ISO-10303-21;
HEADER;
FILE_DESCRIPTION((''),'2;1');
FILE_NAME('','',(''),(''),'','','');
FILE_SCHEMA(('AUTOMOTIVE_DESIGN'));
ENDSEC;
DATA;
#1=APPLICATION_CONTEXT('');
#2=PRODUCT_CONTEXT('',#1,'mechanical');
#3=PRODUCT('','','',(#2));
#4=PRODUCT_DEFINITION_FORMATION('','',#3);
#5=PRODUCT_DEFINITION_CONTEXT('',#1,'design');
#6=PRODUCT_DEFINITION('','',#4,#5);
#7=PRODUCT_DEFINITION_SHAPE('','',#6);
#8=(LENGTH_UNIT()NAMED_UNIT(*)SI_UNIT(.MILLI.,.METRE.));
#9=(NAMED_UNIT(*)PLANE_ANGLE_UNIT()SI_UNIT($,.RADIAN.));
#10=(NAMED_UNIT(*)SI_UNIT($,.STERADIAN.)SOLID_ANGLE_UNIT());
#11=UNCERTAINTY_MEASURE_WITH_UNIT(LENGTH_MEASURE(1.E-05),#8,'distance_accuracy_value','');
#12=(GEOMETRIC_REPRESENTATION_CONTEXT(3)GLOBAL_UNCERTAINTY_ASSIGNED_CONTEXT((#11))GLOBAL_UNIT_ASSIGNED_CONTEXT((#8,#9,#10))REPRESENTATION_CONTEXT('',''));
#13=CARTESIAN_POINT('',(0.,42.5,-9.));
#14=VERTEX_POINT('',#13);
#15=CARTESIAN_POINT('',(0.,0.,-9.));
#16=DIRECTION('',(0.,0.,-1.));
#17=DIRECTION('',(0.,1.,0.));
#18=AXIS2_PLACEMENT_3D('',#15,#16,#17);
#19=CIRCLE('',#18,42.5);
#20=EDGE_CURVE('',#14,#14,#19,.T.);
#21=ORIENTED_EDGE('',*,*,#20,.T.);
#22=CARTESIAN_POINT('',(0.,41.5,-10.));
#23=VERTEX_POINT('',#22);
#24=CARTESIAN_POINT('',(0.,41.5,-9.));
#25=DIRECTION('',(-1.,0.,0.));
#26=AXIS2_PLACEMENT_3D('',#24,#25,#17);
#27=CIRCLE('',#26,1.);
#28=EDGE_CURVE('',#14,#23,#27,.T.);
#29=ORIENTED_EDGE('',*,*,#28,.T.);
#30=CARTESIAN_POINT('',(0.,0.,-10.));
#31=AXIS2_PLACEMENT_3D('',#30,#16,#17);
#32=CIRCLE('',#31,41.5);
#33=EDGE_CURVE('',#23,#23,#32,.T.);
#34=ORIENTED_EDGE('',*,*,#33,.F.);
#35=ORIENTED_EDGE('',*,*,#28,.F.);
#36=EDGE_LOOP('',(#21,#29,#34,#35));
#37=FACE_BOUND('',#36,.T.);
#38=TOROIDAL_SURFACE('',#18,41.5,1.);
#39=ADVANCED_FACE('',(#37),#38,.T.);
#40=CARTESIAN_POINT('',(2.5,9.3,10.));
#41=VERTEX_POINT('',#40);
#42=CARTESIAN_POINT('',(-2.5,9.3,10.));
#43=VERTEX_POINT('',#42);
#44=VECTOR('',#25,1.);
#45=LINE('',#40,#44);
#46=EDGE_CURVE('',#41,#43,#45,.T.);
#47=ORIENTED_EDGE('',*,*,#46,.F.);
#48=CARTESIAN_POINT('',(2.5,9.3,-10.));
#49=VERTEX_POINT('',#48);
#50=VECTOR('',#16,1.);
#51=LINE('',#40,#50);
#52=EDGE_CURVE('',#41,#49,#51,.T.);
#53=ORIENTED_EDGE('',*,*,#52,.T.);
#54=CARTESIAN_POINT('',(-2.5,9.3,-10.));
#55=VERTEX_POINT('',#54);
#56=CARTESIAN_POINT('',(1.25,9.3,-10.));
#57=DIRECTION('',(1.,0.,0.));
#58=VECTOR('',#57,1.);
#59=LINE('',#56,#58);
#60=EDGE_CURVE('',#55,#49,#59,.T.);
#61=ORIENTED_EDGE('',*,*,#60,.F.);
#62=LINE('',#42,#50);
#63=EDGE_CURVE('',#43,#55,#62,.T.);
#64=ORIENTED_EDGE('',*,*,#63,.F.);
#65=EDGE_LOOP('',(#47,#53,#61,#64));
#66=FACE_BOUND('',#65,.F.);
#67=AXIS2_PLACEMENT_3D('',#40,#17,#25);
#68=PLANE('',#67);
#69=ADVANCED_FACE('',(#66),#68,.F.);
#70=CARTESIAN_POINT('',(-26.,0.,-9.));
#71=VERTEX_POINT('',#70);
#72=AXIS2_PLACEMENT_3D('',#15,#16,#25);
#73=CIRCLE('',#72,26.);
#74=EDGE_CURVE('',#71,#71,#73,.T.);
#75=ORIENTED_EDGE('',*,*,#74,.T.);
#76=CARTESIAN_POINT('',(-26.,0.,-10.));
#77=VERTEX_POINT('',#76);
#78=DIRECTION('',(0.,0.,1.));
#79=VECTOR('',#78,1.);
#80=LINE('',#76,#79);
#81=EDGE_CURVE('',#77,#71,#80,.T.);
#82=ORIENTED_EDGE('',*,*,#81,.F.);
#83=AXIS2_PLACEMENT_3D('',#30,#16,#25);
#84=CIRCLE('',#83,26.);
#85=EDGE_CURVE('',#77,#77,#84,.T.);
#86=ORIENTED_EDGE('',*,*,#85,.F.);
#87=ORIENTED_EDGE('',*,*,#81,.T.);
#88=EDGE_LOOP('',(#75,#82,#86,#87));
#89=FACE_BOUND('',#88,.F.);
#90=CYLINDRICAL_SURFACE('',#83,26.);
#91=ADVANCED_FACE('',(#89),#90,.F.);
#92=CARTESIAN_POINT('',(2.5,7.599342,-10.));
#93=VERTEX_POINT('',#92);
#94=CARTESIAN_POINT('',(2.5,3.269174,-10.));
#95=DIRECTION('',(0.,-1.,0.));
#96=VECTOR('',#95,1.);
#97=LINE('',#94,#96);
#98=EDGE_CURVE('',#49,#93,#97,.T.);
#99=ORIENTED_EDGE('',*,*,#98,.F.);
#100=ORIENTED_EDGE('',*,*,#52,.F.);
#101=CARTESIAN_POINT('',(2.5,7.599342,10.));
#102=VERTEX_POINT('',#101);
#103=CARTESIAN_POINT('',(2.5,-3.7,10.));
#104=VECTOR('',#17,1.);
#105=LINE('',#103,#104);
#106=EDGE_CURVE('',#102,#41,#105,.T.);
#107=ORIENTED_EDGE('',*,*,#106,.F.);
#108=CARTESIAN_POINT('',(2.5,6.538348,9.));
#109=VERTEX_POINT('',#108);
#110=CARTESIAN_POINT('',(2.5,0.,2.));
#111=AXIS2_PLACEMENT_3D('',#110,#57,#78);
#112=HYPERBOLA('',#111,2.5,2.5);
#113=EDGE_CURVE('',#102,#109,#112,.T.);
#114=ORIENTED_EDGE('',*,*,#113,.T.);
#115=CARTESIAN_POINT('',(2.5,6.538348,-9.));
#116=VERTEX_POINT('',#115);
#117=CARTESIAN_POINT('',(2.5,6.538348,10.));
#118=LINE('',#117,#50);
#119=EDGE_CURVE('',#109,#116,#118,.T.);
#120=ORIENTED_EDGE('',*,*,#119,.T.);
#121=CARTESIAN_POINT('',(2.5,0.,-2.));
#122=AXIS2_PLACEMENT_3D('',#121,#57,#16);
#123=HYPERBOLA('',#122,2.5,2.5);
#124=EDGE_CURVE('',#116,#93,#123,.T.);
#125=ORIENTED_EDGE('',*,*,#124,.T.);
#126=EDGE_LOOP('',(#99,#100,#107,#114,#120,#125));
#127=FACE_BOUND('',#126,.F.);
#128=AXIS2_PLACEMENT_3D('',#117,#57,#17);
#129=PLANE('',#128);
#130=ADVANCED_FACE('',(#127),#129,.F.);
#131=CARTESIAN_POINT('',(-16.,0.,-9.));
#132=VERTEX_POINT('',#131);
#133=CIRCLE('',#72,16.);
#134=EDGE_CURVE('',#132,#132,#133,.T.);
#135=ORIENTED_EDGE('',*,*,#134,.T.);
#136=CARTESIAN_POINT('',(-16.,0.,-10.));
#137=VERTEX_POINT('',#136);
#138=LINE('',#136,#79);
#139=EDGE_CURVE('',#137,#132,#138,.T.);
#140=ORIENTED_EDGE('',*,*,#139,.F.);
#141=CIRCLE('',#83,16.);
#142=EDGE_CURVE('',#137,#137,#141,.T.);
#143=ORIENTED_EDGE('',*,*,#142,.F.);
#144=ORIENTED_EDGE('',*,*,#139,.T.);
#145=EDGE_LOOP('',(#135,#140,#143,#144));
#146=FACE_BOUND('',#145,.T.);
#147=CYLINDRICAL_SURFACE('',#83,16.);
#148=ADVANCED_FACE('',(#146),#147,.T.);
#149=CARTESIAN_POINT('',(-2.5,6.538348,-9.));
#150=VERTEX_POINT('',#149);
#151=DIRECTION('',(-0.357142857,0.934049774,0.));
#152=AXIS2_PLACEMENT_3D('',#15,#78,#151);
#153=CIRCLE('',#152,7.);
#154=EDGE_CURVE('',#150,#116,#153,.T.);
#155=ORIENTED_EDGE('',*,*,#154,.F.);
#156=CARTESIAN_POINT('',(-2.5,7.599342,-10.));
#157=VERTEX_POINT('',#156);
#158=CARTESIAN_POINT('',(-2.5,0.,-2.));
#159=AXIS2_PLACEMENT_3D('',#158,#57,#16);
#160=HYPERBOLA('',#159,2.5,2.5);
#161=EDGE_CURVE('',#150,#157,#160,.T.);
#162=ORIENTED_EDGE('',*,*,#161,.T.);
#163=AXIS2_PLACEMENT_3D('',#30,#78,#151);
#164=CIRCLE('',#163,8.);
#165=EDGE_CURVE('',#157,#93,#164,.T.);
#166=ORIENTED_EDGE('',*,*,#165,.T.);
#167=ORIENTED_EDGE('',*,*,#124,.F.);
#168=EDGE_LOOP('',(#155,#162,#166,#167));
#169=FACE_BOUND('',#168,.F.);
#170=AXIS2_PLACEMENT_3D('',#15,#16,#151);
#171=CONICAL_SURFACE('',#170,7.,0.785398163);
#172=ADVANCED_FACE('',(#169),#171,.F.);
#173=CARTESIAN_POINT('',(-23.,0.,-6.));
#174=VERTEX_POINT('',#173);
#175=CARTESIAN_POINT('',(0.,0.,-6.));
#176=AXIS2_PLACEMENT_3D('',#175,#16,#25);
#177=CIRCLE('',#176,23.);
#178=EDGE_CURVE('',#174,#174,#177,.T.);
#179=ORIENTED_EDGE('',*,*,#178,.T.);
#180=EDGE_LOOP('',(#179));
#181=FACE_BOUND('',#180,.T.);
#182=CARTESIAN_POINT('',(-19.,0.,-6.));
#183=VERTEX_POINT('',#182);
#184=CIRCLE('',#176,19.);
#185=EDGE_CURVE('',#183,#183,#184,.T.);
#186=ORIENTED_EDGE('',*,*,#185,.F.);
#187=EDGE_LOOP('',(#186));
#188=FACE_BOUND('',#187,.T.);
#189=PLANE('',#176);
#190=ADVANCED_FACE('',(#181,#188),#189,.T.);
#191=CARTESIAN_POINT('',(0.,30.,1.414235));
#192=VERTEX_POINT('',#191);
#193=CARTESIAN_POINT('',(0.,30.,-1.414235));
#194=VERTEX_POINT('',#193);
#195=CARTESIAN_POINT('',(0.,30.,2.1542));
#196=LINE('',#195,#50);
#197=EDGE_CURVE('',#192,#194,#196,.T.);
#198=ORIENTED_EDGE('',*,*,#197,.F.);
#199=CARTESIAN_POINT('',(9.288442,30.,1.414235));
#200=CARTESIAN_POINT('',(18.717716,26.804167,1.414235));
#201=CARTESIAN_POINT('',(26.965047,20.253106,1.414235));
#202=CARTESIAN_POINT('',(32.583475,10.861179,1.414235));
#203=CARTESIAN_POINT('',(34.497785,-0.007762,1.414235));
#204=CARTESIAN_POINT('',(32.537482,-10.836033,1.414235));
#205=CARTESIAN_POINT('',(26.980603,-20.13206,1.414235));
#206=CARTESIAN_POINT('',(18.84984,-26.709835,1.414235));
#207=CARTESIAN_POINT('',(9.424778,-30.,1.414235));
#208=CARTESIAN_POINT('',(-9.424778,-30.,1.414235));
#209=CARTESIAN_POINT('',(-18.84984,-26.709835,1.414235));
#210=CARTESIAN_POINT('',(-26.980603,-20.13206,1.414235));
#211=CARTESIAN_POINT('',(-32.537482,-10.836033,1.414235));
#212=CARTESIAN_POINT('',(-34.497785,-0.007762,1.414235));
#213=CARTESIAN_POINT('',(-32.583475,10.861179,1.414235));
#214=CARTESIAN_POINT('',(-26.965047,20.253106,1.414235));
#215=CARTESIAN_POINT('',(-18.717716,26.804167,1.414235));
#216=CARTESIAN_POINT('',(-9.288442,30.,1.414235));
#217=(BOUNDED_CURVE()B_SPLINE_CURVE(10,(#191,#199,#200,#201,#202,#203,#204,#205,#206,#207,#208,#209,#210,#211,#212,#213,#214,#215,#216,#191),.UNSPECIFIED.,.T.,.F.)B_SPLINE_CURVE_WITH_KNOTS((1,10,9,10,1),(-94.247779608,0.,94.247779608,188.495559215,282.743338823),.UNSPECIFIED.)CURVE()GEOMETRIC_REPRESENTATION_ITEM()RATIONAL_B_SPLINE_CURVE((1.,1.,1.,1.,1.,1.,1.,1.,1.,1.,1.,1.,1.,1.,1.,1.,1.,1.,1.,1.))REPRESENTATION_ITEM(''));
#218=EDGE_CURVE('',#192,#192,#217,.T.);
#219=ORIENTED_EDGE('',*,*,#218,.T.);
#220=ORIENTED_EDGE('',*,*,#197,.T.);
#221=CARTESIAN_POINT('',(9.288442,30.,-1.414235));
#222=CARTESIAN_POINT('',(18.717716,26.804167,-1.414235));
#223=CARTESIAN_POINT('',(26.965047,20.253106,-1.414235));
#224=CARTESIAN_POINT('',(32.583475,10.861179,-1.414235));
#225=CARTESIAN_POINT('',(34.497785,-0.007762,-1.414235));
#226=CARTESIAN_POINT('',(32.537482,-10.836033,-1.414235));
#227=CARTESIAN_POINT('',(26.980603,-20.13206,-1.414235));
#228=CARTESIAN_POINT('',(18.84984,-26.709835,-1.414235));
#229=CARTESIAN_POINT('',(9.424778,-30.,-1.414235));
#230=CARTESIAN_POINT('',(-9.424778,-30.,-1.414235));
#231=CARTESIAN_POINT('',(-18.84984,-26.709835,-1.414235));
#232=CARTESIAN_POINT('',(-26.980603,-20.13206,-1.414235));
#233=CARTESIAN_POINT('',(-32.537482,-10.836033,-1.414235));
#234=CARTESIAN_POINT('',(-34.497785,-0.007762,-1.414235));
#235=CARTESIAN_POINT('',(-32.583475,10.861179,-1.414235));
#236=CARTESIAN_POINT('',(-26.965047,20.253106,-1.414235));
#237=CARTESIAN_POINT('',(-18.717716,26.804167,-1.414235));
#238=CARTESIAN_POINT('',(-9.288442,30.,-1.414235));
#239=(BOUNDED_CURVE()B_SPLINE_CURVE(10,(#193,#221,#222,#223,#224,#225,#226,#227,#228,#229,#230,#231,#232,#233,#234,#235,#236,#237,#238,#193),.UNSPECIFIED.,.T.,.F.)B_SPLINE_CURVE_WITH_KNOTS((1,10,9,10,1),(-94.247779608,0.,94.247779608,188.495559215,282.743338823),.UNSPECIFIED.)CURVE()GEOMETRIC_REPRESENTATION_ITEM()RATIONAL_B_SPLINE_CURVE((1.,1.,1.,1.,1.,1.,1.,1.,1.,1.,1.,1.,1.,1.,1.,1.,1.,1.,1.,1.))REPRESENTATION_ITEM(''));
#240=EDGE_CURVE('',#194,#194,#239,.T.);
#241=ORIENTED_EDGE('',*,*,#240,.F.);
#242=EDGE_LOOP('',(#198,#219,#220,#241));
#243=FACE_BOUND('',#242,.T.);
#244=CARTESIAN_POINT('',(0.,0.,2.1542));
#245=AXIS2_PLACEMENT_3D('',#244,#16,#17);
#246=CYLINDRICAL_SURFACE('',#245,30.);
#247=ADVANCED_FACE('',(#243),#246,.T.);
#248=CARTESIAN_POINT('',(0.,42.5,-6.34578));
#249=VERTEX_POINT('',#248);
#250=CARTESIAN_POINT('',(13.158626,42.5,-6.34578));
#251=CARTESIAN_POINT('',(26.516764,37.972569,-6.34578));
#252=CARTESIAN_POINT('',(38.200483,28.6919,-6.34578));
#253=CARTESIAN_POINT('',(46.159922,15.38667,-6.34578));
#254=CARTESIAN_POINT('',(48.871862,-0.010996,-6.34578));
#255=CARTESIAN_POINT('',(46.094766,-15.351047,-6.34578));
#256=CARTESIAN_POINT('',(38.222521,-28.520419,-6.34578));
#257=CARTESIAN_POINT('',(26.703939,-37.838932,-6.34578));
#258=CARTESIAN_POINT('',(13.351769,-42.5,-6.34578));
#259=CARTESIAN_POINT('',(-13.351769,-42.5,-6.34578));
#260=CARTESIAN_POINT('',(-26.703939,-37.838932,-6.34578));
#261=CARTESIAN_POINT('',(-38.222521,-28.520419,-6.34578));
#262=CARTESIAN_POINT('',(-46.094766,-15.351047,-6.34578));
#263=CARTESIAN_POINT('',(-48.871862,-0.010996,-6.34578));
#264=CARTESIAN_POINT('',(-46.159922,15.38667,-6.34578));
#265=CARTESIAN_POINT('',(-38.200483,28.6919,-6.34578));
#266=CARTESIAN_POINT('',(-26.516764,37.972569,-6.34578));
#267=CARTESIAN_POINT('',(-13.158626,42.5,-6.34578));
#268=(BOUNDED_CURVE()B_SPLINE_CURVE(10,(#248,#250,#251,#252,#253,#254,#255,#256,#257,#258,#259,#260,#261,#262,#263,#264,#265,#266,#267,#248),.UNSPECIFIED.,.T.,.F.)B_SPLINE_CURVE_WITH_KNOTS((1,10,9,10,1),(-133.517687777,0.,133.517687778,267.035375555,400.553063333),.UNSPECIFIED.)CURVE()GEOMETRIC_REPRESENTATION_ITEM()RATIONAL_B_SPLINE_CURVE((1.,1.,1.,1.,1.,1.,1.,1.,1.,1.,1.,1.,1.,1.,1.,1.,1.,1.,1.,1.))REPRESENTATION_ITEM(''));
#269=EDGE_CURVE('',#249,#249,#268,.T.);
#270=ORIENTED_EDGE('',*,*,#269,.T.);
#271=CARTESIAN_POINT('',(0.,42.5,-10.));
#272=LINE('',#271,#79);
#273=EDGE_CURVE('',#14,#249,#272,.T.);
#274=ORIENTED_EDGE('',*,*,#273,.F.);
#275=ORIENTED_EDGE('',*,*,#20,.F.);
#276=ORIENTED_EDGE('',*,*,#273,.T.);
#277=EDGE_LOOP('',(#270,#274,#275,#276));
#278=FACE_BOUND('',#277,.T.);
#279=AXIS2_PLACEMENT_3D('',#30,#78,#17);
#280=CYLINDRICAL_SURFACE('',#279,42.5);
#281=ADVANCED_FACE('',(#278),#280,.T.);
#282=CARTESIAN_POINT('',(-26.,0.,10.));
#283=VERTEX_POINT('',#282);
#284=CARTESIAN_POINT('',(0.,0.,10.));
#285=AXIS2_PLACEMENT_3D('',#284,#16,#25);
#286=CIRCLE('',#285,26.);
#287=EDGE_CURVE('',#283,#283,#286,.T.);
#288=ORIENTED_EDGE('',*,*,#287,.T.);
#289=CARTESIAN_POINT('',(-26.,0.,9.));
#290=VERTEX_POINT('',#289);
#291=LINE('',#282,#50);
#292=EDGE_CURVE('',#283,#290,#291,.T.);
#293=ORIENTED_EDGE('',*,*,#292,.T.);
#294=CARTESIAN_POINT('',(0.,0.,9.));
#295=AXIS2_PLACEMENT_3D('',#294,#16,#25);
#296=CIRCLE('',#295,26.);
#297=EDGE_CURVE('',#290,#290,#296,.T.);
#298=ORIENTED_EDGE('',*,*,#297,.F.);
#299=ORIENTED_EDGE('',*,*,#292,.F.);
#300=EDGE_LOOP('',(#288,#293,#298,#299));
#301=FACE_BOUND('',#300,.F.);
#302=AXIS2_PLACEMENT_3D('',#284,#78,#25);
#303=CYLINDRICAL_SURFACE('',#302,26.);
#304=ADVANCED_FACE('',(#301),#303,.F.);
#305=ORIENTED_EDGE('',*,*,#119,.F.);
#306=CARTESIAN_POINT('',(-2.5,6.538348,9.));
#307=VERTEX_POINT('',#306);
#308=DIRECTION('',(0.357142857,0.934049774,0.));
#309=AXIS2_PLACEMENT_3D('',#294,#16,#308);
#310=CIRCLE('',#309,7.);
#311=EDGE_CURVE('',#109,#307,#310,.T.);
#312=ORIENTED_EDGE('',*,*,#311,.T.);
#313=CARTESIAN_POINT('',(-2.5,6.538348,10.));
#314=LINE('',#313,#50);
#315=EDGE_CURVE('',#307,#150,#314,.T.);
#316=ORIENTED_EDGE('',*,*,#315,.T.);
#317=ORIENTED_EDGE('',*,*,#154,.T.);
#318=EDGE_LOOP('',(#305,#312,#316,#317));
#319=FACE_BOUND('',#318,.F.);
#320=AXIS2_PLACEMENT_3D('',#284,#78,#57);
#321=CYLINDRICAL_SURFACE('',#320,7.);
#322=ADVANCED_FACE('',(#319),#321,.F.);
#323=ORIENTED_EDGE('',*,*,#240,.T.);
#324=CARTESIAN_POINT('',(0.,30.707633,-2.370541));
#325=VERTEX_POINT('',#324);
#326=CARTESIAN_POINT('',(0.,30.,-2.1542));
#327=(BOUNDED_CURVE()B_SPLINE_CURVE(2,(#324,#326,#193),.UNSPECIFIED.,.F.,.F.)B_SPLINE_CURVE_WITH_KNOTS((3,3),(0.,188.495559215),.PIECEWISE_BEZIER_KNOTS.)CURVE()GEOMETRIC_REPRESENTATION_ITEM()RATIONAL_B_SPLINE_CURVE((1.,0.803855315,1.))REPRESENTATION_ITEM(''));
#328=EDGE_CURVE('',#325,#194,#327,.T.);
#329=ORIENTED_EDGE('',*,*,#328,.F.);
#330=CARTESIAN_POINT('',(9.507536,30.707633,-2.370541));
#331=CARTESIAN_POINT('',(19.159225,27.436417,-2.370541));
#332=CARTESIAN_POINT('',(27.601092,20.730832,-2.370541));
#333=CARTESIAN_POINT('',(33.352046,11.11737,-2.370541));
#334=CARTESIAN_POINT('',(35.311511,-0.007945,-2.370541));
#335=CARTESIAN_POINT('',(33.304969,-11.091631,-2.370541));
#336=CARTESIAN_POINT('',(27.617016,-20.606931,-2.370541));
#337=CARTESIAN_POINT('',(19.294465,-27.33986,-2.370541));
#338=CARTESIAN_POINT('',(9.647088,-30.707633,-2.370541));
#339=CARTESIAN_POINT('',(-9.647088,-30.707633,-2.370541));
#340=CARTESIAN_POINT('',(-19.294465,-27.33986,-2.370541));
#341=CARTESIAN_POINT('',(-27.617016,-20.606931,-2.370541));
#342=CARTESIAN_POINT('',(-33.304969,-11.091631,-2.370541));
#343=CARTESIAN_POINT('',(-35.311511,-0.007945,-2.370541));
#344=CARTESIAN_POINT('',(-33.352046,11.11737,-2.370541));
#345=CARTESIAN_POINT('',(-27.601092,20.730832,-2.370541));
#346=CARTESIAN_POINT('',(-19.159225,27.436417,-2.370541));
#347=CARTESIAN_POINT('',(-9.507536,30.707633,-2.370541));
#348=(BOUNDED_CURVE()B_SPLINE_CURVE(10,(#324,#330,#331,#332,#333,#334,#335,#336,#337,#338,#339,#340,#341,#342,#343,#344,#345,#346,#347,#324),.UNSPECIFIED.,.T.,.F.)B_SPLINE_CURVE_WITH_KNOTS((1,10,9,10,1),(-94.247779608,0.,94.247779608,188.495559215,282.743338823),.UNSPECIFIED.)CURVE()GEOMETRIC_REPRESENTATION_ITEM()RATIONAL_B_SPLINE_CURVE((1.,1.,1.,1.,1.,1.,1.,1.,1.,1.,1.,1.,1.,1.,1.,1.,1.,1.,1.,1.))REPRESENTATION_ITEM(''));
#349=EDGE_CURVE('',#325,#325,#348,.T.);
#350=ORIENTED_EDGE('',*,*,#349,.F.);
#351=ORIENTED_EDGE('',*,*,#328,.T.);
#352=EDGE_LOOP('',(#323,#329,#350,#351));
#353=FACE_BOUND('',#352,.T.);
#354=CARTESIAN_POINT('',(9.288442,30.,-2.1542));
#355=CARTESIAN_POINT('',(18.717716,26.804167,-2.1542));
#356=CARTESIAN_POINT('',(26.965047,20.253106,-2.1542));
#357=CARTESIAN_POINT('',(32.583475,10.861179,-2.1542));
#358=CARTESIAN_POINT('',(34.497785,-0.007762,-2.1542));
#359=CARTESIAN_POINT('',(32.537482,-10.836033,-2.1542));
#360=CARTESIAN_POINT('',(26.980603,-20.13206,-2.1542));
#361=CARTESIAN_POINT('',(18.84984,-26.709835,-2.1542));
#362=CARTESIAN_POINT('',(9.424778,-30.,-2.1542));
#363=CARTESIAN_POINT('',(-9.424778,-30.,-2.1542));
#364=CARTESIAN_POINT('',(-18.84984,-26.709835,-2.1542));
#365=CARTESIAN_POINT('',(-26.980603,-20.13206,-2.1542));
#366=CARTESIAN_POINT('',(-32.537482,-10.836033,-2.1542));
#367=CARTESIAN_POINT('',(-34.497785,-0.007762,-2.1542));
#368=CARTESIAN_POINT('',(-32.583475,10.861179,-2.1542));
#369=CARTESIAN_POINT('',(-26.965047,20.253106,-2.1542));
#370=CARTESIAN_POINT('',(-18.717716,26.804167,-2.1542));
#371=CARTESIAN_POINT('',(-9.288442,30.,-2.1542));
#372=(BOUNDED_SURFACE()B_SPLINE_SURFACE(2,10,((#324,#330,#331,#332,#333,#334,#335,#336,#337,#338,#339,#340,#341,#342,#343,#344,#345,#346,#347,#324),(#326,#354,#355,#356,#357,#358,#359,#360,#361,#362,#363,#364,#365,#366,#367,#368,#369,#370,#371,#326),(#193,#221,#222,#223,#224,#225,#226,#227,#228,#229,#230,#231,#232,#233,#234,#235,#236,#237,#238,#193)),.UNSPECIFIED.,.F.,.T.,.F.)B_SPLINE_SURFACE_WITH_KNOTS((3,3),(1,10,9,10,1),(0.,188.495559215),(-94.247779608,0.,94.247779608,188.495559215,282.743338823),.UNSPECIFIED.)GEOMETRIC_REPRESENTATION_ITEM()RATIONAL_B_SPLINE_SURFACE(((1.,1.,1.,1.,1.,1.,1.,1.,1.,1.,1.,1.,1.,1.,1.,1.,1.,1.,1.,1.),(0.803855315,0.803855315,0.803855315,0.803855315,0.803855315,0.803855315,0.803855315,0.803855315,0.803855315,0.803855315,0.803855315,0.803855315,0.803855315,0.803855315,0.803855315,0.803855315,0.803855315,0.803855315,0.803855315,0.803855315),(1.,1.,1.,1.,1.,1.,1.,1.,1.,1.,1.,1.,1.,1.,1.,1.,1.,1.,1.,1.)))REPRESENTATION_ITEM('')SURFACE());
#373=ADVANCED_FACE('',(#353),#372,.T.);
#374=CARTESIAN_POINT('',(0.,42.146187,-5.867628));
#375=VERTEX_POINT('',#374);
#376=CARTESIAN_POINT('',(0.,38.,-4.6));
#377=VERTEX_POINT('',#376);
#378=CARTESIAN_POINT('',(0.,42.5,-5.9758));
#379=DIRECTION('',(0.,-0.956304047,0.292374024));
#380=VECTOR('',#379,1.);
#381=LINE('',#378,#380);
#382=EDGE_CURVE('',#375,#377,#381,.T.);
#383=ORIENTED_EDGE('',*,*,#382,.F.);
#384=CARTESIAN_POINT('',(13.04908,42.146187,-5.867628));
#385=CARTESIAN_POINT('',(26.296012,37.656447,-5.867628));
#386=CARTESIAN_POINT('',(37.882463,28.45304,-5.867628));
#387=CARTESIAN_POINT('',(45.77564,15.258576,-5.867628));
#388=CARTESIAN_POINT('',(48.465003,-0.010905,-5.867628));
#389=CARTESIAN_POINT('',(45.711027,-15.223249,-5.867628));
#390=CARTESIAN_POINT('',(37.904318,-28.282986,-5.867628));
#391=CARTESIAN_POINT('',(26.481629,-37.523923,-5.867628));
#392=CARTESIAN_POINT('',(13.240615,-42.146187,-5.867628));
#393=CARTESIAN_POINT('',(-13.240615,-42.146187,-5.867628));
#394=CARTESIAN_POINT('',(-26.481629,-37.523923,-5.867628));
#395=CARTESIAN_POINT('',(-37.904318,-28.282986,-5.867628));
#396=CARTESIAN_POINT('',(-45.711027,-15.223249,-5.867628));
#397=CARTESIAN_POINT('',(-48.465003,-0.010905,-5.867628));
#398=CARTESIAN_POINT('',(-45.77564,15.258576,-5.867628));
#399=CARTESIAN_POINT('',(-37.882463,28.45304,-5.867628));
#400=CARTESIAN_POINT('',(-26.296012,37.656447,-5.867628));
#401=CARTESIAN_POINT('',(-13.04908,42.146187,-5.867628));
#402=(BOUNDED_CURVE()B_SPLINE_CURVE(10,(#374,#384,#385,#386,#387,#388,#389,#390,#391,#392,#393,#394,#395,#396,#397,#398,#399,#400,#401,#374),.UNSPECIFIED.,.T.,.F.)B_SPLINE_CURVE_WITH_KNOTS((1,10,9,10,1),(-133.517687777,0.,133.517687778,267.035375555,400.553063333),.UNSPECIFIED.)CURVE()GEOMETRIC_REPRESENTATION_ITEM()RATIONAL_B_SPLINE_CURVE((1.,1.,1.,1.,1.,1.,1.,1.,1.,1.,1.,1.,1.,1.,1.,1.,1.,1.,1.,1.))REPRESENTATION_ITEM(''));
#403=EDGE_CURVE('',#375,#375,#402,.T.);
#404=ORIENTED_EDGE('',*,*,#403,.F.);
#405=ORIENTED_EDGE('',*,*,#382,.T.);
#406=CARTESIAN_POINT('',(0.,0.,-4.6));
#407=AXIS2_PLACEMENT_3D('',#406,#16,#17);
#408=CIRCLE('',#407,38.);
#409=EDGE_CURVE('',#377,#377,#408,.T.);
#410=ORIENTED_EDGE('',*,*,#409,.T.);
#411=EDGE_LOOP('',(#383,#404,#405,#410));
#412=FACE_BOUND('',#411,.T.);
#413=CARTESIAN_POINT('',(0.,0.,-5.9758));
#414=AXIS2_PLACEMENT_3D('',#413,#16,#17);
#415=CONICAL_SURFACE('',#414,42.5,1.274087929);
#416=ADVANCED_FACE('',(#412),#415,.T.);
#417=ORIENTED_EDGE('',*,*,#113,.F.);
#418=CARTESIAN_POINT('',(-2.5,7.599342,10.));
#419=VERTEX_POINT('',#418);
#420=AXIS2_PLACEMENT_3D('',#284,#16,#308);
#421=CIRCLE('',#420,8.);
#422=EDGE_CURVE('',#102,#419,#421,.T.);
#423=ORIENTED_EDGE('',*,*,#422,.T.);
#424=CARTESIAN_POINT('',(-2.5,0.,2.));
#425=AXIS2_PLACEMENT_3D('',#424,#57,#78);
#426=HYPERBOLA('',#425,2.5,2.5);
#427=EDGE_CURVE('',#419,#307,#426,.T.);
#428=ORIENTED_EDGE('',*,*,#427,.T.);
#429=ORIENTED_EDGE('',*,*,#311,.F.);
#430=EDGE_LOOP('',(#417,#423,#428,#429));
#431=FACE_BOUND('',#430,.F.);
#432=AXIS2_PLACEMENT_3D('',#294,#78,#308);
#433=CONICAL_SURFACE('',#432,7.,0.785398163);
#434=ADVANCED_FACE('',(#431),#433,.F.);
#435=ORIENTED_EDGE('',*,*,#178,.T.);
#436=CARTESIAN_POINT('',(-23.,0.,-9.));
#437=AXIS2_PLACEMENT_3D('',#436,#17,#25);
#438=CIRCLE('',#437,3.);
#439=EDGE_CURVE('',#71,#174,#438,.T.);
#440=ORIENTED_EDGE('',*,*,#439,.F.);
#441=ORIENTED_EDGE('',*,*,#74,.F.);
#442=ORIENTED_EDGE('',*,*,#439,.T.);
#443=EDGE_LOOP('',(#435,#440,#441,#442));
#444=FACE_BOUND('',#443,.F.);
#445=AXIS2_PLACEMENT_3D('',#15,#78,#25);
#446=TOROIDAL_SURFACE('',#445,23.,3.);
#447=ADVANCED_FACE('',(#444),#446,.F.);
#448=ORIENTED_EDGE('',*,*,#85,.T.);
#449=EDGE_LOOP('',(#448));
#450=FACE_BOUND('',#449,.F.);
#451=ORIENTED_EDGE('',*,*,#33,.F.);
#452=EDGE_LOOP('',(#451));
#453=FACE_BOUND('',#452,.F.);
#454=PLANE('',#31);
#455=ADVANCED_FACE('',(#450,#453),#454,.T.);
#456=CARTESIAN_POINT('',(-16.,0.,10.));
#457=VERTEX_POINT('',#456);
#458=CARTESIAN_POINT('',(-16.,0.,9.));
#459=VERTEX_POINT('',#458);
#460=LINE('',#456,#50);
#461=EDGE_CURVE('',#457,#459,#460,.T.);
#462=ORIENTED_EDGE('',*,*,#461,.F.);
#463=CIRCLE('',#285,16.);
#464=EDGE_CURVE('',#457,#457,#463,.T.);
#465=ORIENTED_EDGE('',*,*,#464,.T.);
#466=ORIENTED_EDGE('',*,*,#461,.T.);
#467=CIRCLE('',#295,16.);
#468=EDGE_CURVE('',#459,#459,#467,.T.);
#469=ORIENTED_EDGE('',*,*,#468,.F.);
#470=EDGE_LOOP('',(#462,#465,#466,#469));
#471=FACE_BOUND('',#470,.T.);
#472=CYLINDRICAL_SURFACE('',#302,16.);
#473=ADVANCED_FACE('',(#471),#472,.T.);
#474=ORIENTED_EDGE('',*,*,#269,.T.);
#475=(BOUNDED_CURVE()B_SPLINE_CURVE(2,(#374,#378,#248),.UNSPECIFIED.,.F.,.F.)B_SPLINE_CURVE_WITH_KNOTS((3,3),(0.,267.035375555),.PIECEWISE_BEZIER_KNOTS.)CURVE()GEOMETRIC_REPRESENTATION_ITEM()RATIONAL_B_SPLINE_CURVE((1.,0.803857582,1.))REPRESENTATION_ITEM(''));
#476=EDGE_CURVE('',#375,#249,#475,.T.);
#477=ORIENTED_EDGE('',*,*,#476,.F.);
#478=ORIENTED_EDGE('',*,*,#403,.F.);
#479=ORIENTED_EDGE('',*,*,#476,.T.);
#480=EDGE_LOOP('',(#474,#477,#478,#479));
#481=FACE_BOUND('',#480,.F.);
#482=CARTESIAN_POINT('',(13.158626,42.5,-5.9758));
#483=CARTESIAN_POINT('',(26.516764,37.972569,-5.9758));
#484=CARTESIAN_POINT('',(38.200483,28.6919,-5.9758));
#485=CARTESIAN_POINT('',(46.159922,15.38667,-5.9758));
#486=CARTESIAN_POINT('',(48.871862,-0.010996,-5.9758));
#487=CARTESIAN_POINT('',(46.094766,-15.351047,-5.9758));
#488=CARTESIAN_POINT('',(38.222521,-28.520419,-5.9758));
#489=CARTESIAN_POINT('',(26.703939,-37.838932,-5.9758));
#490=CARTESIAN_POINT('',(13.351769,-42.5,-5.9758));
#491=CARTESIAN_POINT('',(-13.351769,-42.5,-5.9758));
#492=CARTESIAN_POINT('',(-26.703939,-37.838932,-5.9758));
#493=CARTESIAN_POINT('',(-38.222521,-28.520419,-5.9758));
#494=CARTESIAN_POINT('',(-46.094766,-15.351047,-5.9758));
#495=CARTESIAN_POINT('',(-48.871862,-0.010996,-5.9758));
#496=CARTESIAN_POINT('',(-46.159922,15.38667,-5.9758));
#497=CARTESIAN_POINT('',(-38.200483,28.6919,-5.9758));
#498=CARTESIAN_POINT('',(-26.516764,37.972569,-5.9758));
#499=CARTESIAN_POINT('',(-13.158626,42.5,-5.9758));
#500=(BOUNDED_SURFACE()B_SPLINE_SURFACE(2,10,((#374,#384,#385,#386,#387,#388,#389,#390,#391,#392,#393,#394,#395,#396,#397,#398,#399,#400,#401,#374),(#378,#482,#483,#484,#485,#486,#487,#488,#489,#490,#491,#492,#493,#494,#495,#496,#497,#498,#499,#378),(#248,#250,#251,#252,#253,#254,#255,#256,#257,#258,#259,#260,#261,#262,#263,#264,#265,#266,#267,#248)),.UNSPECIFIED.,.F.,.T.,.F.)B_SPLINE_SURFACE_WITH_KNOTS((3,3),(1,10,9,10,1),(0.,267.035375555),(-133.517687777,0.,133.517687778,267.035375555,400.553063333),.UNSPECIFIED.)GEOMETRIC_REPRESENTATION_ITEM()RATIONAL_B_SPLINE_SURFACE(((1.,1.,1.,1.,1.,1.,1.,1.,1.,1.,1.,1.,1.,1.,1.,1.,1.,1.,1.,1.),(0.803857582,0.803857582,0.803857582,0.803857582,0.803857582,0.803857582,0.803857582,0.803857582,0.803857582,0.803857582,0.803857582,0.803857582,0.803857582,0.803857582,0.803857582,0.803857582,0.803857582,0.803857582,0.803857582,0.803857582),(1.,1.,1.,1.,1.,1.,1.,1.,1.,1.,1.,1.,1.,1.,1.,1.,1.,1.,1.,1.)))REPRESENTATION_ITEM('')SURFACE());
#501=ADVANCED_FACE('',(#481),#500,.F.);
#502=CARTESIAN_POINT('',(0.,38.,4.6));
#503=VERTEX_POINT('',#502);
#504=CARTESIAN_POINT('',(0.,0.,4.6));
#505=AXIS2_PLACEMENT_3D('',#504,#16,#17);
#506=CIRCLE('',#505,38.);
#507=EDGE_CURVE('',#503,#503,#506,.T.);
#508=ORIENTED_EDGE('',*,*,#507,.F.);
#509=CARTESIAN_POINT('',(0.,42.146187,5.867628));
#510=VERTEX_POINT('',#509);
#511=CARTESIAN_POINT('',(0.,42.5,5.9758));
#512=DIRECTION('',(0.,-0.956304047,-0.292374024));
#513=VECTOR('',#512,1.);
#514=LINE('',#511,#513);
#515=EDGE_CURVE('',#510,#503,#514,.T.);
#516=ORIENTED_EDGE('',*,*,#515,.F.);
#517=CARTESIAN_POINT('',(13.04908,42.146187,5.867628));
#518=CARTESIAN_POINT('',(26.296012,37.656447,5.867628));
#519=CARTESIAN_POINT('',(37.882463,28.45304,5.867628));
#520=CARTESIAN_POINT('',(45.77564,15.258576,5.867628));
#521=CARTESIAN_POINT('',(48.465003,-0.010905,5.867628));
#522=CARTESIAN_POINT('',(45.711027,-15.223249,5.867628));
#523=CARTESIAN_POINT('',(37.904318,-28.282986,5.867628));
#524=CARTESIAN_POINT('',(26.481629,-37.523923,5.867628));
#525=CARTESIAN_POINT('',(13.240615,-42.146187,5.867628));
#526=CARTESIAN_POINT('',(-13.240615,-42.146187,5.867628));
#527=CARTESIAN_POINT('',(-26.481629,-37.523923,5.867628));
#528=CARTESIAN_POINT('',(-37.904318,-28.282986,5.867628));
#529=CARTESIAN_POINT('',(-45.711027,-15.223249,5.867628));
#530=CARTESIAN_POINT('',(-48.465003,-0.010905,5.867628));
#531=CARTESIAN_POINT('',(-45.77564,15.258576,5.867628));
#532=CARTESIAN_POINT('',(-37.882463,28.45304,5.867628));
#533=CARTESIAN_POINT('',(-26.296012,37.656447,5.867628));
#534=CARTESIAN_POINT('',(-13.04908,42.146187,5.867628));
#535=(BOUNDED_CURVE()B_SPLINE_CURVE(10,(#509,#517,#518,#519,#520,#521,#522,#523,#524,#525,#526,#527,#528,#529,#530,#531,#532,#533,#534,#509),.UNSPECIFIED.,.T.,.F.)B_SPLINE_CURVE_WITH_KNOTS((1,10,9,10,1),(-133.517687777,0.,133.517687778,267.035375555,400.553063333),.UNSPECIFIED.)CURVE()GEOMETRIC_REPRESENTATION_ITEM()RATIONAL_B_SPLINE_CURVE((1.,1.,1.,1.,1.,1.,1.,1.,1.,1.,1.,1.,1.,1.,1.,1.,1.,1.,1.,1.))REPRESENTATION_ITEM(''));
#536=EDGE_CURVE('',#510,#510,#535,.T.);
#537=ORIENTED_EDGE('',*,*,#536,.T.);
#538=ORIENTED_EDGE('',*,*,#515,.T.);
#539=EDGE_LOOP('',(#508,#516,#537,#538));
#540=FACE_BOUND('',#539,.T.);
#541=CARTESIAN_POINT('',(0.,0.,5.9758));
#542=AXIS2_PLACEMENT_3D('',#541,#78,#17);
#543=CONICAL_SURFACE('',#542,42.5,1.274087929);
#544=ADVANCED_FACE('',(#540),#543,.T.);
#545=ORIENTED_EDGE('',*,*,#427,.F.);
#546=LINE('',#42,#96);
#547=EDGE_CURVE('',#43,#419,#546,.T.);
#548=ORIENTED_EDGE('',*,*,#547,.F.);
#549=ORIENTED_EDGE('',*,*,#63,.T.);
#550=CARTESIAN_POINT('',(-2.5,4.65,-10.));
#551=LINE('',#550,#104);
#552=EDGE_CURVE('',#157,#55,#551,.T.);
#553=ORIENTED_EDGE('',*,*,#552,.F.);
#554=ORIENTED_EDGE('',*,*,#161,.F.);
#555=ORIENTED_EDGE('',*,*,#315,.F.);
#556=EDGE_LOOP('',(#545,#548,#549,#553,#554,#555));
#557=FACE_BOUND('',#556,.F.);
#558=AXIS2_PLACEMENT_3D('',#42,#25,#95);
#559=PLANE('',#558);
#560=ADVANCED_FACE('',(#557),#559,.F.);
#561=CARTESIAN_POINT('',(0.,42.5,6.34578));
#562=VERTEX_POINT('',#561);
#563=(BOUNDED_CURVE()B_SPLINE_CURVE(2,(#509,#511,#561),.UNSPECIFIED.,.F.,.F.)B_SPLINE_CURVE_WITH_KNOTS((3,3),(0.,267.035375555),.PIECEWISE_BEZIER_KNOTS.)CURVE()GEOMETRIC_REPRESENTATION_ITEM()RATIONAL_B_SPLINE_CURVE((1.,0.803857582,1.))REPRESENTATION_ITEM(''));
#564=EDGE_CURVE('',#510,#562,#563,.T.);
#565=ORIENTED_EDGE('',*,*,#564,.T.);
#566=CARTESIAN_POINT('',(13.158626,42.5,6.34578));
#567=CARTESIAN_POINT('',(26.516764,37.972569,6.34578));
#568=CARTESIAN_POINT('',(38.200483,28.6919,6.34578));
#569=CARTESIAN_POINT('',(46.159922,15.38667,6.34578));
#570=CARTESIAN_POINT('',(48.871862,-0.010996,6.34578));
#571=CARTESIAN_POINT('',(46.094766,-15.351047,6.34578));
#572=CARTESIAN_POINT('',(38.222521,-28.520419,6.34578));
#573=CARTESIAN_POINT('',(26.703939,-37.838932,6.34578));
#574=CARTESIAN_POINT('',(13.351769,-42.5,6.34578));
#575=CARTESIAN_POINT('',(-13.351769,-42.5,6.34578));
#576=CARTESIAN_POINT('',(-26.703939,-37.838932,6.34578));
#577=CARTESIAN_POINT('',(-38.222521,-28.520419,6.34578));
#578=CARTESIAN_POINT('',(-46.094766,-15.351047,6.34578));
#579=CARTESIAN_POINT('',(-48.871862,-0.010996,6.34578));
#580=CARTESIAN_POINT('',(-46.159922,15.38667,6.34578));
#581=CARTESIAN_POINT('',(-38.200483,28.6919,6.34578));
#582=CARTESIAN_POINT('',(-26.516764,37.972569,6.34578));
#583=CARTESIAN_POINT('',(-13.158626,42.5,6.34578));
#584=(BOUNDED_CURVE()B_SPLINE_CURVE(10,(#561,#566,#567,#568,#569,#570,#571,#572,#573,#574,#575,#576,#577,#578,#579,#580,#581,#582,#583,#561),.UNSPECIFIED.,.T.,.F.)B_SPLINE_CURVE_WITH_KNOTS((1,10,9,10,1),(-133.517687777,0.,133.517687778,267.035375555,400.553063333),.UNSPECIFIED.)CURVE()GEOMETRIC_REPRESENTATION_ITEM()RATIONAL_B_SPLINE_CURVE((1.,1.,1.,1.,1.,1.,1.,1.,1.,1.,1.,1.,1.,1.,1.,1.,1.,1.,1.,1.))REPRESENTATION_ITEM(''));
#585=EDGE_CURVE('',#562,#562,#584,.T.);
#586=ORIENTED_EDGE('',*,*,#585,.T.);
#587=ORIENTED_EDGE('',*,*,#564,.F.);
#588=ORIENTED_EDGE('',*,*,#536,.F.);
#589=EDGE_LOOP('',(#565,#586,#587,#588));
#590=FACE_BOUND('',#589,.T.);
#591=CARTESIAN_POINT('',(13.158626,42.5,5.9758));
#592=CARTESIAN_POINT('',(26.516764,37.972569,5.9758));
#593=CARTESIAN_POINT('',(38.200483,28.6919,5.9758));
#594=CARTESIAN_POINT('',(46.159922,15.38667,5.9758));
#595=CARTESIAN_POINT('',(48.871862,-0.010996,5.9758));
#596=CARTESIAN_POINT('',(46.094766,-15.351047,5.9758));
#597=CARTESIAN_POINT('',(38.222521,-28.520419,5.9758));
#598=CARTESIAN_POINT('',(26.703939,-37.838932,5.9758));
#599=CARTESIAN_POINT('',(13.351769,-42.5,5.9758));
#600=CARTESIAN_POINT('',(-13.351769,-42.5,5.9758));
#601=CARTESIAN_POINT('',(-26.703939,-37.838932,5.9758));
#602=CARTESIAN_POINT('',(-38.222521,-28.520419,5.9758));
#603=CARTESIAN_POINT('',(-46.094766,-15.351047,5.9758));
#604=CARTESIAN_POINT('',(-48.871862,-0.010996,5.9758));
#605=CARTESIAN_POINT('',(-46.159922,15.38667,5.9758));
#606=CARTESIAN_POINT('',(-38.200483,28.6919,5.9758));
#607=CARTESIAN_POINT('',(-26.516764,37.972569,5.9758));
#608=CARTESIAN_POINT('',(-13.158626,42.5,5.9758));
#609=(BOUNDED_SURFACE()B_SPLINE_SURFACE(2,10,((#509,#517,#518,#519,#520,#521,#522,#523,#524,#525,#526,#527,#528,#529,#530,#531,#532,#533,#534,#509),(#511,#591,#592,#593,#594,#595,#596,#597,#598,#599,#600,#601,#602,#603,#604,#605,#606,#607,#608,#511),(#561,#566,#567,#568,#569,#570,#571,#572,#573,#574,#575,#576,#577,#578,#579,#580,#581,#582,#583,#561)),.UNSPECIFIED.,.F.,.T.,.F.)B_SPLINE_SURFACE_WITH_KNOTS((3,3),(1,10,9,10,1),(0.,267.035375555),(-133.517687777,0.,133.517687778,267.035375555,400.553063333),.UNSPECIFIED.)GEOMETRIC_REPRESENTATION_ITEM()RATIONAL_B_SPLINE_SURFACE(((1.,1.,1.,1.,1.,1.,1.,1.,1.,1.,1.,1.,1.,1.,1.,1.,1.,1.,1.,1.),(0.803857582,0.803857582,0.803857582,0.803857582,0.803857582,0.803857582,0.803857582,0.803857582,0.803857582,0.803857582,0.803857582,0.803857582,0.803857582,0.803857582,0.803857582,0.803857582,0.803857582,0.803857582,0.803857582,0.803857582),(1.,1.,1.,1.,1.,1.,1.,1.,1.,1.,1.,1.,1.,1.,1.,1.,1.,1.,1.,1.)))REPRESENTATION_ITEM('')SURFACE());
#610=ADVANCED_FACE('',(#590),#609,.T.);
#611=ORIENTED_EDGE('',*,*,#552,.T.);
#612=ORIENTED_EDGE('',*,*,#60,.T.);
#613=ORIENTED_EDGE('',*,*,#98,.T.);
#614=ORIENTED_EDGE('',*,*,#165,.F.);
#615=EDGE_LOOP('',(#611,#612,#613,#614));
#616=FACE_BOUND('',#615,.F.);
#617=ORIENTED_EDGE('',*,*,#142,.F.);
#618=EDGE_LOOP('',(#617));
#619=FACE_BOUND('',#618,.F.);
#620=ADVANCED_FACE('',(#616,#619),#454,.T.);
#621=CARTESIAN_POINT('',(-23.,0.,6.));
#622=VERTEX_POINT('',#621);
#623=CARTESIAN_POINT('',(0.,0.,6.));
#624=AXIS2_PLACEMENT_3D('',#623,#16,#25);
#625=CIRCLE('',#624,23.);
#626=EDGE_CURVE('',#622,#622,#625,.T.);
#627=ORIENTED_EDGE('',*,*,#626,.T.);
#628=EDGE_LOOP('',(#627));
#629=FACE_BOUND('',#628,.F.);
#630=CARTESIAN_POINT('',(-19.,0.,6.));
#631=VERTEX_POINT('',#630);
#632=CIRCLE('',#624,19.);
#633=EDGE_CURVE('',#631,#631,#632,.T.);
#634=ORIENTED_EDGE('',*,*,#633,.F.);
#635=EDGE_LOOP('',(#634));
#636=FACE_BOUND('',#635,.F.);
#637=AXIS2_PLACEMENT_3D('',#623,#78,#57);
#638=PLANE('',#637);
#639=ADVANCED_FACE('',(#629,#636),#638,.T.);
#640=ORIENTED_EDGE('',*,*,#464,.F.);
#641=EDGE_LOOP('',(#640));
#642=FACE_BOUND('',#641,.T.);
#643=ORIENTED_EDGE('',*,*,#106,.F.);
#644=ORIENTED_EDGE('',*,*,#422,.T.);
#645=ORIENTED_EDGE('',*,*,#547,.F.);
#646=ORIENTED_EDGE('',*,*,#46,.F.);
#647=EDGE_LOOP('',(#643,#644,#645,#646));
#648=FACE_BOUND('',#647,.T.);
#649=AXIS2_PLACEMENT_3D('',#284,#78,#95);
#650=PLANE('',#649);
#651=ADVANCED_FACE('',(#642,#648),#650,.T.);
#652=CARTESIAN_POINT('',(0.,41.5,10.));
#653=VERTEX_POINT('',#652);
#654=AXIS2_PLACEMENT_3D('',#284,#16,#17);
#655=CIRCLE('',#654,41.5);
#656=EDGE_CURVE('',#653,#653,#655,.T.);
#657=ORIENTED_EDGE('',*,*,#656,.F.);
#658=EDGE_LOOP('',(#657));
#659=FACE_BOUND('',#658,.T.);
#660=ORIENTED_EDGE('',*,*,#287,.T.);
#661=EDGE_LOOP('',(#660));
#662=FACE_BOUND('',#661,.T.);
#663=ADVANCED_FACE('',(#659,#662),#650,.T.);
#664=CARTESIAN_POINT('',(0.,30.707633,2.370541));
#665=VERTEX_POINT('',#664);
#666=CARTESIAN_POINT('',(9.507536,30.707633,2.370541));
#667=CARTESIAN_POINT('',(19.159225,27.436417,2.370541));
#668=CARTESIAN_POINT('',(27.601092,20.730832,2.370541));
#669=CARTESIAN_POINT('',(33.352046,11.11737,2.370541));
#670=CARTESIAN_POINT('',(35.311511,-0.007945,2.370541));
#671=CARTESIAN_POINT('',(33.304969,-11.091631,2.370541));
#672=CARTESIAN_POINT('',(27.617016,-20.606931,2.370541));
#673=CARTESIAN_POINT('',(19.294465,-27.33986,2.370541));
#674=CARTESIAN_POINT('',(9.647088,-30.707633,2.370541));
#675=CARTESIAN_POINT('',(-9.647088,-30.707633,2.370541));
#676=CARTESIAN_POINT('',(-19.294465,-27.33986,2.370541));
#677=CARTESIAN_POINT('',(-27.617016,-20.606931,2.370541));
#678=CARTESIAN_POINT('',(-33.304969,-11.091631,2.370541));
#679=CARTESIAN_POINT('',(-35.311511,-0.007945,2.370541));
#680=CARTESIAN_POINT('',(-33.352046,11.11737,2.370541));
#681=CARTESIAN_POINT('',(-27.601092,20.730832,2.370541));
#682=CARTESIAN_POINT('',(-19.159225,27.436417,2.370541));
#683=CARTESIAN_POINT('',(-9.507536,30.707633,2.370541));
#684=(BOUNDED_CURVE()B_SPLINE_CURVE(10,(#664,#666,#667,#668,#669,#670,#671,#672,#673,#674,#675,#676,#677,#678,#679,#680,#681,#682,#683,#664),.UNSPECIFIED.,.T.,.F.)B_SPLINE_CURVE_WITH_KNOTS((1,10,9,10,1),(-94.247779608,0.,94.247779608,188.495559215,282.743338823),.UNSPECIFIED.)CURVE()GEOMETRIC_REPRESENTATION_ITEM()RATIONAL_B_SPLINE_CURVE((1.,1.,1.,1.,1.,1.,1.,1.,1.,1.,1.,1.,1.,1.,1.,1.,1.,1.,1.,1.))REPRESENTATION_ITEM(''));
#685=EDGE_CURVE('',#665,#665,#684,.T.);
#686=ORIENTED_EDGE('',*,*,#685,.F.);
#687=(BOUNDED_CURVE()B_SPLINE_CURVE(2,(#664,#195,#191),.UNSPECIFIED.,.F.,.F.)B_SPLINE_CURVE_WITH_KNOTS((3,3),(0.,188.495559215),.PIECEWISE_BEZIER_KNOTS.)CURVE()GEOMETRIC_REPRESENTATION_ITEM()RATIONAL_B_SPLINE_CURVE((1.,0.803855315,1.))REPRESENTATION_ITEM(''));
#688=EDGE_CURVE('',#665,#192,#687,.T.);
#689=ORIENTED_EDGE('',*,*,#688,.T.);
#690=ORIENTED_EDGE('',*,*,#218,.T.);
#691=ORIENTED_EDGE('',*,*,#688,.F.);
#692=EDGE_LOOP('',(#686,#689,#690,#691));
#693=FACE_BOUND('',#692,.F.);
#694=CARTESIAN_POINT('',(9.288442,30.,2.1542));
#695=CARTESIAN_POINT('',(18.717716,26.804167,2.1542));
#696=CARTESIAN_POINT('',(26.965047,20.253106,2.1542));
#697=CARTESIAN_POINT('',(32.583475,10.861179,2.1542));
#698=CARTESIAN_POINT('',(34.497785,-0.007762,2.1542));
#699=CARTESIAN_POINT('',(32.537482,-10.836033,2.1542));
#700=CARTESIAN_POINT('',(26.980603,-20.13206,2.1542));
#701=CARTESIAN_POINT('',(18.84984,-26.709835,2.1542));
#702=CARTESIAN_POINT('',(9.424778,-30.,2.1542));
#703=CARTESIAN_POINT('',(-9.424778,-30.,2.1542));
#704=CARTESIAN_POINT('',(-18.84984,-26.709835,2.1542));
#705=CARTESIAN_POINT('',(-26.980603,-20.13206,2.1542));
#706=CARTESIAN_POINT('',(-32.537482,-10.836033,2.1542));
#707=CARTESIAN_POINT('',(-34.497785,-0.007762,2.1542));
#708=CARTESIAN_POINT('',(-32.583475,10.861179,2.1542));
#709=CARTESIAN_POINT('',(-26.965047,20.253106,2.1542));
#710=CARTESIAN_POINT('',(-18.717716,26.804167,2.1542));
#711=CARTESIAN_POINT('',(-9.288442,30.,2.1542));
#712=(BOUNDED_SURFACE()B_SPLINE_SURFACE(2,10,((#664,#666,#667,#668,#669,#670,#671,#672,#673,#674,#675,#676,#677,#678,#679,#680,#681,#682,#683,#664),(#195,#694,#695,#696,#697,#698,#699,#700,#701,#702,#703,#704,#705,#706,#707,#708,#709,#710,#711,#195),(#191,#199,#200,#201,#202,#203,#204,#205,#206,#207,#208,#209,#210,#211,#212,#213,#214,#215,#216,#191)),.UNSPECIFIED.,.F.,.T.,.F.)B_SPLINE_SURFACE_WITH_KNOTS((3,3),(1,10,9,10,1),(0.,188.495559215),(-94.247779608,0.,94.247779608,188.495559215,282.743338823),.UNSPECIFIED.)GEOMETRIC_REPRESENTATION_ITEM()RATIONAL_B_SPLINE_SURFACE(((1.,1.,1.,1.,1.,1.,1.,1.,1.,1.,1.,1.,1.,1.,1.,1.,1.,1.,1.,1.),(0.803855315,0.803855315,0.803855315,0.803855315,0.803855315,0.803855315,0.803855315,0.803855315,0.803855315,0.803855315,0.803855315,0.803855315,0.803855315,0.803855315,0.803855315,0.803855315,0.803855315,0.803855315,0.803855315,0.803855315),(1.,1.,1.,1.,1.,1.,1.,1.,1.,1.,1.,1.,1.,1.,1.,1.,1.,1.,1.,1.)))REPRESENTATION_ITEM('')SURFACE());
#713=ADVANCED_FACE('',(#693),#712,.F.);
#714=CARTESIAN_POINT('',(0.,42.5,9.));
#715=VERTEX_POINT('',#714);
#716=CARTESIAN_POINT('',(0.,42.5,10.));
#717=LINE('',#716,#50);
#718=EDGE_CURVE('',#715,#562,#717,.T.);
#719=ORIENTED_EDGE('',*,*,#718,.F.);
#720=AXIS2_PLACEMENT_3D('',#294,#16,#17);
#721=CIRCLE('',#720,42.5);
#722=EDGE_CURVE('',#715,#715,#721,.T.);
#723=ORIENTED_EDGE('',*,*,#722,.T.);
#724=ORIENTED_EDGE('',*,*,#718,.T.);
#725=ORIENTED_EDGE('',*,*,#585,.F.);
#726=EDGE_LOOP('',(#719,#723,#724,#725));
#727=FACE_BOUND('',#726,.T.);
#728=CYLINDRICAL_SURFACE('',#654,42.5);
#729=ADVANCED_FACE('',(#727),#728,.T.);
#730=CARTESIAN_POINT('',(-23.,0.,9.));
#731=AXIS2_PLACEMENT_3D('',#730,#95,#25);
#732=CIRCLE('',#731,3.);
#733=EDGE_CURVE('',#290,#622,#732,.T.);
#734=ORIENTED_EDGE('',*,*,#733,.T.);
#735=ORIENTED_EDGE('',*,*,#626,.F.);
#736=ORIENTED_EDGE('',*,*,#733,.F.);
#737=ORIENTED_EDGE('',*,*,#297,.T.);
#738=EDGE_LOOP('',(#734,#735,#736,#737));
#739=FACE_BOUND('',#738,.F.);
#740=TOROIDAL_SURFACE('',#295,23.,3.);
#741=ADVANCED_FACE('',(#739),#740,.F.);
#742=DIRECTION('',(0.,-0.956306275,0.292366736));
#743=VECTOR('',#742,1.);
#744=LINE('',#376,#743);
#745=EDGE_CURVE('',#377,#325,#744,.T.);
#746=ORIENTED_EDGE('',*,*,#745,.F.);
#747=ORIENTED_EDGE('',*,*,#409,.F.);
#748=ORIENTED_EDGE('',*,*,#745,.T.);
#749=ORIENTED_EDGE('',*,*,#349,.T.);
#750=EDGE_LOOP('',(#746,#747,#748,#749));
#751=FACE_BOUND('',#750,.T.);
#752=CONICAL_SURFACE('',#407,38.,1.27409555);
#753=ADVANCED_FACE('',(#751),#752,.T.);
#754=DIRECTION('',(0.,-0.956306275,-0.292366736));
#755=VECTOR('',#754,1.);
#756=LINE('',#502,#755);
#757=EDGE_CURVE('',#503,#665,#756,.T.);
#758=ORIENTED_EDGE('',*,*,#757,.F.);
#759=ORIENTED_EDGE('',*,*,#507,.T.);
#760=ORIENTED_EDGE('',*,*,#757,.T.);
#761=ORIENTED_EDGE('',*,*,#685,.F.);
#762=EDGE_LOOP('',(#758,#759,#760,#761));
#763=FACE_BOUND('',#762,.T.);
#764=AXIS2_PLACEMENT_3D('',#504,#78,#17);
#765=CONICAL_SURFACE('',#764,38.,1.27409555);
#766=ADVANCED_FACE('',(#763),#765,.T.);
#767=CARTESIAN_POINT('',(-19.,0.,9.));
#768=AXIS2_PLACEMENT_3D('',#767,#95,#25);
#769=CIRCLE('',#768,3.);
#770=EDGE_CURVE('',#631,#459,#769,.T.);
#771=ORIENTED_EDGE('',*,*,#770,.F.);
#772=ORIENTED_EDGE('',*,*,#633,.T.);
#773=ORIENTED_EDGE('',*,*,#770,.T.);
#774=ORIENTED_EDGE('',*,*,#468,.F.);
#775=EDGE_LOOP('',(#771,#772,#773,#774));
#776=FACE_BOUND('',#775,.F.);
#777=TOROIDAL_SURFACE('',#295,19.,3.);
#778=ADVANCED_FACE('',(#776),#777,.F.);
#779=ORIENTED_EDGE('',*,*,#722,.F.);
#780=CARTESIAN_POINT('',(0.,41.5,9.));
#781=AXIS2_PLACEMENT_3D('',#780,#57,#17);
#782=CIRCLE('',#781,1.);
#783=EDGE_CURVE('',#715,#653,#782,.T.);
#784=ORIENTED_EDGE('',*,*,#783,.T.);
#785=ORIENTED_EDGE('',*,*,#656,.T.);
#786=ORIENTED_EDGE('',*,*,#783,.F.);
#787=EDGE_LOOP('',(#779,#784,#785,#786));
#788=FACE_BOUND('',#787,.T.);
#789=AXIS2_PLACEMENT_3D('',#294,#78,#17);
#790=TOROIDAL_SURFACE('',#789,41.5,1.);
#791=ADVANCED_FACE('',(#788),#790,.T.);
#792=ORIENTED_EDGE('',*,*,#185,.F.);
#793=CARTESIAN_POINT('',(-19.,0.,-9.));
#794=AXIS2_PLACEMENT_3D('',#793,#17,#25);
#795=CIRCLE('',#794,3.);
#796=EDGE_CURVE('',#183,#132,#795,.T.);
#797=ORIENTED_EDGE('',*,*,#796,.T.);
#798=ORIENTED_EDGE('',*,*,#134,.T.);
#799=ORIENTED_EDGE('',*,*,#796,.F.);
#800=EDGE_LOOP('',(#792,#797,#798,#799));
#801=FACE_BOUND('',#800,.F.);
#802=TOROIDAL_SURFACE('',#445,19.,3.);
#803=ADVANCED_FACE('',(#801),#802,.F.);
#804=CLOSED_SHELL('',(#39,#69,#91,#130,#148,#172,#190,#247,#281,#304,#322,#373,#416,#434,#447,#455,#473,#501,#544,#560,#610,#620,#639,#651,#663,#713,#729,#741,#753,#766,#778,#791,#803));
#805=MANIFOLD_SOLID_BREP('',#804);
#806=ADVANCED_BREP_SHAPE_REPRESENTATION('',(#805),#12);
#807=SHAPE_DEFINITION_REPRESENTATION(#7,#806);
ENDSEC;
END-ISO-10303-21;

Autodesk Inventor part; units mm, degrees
ref_plane "YZ Plane" through (0, 0, 0) normal (1, 0, 0) x (0, 1, 0)
ref_plane "XZ Plane" through (0, 0, 0) normal (0, 1, 0) x (-1, 0, 0)
ref_plane "XY Plane" through (0, 0, 0) normal (0, 0, 1) x (1, 0, 0)
sketch "스케치1" plane through (0, 0, 0) normal (1, 0, 0) x (0, 1, 0)
  line L0 (0, 0) -> (0, -10)
  line L1 (0, -10) -> (42.5, -10)
  line L2 (42.5, -10) -> (42.5, -5.9758)
  line L3 (42.5, -5.9758) -> (38, -4.6)
  line L4 (38, -4.6) -> (30, -2.1542)
  line L5 (30, -2.1542) -> (30, 0)
  line L6 (30, 0) -> (0, 0)
  dimension "d0" = 38
  dimension "d1" = 17
  dimension "d2" = 4.6
  dimension "d3" = 4.5
  dimension "d4" = 8
  dimension "d5" = 10
revolve "회전1" add sketch "스케치1" angle 360 about axis through (0, 0, 0) along (0, 0, -1)
fillet "모깎기1" radius 0.5 1 edges at (0, -42.5, -5.9758)
fillet "모깎기2" radius 1 2 edges at (0, -30, -2.1542) (0, -42.5, -10)
sketch "스케치3" plane through (0, 0, -10) normal (0, 0, -1) x (-1, 0, 0)
  circle A0 centre (0, 0) radius 26
  circle A1 centre (0, 0) radius 16
  dimension "d19" = 52
  dimension "d20" = 32
extrude "돌출2" cut sketch "스케치3" against normal blind 4
fillet "모깎기4" radius 3 2 edges at (26, 0, -6) (16, 0, -6)
mirror "미러1" about plane through (0, 30, 0) normal (0, 0, 1) of "모깎기2", "회전1", "모깎기1", "돌출2", "모깎기4"
sketch "스케치2" plane through (0, 0, 10) normal (0, 0, 1) x (1, 0, 0)
  circle A0 centre (0, 0) radius 7
  line L0 (-2.5, -3.7) -> (2.5, -3.7)
  line L1 (2.5, -3.7) -> (2.5, 9.3)
  line L2 (2.5, 9.3) -> (-2.5, 9.3)
  line L3 (-2.5, 9.3) -> (-2.5, -3.7)
  point P0 (0, 0)
  dimension "d10" = 14
  dimension "d11" = 2.3
  dimension "d12" = 5
  dimension "d13" = 2.5
extrude "돌출1" cut sketch "스케치2" against normal up to next
chamfer "모따기1" distance 1 angle 45 2 edges at (0, -7, 10) (0, -7, -10)
properties part number "도면3-3번"
